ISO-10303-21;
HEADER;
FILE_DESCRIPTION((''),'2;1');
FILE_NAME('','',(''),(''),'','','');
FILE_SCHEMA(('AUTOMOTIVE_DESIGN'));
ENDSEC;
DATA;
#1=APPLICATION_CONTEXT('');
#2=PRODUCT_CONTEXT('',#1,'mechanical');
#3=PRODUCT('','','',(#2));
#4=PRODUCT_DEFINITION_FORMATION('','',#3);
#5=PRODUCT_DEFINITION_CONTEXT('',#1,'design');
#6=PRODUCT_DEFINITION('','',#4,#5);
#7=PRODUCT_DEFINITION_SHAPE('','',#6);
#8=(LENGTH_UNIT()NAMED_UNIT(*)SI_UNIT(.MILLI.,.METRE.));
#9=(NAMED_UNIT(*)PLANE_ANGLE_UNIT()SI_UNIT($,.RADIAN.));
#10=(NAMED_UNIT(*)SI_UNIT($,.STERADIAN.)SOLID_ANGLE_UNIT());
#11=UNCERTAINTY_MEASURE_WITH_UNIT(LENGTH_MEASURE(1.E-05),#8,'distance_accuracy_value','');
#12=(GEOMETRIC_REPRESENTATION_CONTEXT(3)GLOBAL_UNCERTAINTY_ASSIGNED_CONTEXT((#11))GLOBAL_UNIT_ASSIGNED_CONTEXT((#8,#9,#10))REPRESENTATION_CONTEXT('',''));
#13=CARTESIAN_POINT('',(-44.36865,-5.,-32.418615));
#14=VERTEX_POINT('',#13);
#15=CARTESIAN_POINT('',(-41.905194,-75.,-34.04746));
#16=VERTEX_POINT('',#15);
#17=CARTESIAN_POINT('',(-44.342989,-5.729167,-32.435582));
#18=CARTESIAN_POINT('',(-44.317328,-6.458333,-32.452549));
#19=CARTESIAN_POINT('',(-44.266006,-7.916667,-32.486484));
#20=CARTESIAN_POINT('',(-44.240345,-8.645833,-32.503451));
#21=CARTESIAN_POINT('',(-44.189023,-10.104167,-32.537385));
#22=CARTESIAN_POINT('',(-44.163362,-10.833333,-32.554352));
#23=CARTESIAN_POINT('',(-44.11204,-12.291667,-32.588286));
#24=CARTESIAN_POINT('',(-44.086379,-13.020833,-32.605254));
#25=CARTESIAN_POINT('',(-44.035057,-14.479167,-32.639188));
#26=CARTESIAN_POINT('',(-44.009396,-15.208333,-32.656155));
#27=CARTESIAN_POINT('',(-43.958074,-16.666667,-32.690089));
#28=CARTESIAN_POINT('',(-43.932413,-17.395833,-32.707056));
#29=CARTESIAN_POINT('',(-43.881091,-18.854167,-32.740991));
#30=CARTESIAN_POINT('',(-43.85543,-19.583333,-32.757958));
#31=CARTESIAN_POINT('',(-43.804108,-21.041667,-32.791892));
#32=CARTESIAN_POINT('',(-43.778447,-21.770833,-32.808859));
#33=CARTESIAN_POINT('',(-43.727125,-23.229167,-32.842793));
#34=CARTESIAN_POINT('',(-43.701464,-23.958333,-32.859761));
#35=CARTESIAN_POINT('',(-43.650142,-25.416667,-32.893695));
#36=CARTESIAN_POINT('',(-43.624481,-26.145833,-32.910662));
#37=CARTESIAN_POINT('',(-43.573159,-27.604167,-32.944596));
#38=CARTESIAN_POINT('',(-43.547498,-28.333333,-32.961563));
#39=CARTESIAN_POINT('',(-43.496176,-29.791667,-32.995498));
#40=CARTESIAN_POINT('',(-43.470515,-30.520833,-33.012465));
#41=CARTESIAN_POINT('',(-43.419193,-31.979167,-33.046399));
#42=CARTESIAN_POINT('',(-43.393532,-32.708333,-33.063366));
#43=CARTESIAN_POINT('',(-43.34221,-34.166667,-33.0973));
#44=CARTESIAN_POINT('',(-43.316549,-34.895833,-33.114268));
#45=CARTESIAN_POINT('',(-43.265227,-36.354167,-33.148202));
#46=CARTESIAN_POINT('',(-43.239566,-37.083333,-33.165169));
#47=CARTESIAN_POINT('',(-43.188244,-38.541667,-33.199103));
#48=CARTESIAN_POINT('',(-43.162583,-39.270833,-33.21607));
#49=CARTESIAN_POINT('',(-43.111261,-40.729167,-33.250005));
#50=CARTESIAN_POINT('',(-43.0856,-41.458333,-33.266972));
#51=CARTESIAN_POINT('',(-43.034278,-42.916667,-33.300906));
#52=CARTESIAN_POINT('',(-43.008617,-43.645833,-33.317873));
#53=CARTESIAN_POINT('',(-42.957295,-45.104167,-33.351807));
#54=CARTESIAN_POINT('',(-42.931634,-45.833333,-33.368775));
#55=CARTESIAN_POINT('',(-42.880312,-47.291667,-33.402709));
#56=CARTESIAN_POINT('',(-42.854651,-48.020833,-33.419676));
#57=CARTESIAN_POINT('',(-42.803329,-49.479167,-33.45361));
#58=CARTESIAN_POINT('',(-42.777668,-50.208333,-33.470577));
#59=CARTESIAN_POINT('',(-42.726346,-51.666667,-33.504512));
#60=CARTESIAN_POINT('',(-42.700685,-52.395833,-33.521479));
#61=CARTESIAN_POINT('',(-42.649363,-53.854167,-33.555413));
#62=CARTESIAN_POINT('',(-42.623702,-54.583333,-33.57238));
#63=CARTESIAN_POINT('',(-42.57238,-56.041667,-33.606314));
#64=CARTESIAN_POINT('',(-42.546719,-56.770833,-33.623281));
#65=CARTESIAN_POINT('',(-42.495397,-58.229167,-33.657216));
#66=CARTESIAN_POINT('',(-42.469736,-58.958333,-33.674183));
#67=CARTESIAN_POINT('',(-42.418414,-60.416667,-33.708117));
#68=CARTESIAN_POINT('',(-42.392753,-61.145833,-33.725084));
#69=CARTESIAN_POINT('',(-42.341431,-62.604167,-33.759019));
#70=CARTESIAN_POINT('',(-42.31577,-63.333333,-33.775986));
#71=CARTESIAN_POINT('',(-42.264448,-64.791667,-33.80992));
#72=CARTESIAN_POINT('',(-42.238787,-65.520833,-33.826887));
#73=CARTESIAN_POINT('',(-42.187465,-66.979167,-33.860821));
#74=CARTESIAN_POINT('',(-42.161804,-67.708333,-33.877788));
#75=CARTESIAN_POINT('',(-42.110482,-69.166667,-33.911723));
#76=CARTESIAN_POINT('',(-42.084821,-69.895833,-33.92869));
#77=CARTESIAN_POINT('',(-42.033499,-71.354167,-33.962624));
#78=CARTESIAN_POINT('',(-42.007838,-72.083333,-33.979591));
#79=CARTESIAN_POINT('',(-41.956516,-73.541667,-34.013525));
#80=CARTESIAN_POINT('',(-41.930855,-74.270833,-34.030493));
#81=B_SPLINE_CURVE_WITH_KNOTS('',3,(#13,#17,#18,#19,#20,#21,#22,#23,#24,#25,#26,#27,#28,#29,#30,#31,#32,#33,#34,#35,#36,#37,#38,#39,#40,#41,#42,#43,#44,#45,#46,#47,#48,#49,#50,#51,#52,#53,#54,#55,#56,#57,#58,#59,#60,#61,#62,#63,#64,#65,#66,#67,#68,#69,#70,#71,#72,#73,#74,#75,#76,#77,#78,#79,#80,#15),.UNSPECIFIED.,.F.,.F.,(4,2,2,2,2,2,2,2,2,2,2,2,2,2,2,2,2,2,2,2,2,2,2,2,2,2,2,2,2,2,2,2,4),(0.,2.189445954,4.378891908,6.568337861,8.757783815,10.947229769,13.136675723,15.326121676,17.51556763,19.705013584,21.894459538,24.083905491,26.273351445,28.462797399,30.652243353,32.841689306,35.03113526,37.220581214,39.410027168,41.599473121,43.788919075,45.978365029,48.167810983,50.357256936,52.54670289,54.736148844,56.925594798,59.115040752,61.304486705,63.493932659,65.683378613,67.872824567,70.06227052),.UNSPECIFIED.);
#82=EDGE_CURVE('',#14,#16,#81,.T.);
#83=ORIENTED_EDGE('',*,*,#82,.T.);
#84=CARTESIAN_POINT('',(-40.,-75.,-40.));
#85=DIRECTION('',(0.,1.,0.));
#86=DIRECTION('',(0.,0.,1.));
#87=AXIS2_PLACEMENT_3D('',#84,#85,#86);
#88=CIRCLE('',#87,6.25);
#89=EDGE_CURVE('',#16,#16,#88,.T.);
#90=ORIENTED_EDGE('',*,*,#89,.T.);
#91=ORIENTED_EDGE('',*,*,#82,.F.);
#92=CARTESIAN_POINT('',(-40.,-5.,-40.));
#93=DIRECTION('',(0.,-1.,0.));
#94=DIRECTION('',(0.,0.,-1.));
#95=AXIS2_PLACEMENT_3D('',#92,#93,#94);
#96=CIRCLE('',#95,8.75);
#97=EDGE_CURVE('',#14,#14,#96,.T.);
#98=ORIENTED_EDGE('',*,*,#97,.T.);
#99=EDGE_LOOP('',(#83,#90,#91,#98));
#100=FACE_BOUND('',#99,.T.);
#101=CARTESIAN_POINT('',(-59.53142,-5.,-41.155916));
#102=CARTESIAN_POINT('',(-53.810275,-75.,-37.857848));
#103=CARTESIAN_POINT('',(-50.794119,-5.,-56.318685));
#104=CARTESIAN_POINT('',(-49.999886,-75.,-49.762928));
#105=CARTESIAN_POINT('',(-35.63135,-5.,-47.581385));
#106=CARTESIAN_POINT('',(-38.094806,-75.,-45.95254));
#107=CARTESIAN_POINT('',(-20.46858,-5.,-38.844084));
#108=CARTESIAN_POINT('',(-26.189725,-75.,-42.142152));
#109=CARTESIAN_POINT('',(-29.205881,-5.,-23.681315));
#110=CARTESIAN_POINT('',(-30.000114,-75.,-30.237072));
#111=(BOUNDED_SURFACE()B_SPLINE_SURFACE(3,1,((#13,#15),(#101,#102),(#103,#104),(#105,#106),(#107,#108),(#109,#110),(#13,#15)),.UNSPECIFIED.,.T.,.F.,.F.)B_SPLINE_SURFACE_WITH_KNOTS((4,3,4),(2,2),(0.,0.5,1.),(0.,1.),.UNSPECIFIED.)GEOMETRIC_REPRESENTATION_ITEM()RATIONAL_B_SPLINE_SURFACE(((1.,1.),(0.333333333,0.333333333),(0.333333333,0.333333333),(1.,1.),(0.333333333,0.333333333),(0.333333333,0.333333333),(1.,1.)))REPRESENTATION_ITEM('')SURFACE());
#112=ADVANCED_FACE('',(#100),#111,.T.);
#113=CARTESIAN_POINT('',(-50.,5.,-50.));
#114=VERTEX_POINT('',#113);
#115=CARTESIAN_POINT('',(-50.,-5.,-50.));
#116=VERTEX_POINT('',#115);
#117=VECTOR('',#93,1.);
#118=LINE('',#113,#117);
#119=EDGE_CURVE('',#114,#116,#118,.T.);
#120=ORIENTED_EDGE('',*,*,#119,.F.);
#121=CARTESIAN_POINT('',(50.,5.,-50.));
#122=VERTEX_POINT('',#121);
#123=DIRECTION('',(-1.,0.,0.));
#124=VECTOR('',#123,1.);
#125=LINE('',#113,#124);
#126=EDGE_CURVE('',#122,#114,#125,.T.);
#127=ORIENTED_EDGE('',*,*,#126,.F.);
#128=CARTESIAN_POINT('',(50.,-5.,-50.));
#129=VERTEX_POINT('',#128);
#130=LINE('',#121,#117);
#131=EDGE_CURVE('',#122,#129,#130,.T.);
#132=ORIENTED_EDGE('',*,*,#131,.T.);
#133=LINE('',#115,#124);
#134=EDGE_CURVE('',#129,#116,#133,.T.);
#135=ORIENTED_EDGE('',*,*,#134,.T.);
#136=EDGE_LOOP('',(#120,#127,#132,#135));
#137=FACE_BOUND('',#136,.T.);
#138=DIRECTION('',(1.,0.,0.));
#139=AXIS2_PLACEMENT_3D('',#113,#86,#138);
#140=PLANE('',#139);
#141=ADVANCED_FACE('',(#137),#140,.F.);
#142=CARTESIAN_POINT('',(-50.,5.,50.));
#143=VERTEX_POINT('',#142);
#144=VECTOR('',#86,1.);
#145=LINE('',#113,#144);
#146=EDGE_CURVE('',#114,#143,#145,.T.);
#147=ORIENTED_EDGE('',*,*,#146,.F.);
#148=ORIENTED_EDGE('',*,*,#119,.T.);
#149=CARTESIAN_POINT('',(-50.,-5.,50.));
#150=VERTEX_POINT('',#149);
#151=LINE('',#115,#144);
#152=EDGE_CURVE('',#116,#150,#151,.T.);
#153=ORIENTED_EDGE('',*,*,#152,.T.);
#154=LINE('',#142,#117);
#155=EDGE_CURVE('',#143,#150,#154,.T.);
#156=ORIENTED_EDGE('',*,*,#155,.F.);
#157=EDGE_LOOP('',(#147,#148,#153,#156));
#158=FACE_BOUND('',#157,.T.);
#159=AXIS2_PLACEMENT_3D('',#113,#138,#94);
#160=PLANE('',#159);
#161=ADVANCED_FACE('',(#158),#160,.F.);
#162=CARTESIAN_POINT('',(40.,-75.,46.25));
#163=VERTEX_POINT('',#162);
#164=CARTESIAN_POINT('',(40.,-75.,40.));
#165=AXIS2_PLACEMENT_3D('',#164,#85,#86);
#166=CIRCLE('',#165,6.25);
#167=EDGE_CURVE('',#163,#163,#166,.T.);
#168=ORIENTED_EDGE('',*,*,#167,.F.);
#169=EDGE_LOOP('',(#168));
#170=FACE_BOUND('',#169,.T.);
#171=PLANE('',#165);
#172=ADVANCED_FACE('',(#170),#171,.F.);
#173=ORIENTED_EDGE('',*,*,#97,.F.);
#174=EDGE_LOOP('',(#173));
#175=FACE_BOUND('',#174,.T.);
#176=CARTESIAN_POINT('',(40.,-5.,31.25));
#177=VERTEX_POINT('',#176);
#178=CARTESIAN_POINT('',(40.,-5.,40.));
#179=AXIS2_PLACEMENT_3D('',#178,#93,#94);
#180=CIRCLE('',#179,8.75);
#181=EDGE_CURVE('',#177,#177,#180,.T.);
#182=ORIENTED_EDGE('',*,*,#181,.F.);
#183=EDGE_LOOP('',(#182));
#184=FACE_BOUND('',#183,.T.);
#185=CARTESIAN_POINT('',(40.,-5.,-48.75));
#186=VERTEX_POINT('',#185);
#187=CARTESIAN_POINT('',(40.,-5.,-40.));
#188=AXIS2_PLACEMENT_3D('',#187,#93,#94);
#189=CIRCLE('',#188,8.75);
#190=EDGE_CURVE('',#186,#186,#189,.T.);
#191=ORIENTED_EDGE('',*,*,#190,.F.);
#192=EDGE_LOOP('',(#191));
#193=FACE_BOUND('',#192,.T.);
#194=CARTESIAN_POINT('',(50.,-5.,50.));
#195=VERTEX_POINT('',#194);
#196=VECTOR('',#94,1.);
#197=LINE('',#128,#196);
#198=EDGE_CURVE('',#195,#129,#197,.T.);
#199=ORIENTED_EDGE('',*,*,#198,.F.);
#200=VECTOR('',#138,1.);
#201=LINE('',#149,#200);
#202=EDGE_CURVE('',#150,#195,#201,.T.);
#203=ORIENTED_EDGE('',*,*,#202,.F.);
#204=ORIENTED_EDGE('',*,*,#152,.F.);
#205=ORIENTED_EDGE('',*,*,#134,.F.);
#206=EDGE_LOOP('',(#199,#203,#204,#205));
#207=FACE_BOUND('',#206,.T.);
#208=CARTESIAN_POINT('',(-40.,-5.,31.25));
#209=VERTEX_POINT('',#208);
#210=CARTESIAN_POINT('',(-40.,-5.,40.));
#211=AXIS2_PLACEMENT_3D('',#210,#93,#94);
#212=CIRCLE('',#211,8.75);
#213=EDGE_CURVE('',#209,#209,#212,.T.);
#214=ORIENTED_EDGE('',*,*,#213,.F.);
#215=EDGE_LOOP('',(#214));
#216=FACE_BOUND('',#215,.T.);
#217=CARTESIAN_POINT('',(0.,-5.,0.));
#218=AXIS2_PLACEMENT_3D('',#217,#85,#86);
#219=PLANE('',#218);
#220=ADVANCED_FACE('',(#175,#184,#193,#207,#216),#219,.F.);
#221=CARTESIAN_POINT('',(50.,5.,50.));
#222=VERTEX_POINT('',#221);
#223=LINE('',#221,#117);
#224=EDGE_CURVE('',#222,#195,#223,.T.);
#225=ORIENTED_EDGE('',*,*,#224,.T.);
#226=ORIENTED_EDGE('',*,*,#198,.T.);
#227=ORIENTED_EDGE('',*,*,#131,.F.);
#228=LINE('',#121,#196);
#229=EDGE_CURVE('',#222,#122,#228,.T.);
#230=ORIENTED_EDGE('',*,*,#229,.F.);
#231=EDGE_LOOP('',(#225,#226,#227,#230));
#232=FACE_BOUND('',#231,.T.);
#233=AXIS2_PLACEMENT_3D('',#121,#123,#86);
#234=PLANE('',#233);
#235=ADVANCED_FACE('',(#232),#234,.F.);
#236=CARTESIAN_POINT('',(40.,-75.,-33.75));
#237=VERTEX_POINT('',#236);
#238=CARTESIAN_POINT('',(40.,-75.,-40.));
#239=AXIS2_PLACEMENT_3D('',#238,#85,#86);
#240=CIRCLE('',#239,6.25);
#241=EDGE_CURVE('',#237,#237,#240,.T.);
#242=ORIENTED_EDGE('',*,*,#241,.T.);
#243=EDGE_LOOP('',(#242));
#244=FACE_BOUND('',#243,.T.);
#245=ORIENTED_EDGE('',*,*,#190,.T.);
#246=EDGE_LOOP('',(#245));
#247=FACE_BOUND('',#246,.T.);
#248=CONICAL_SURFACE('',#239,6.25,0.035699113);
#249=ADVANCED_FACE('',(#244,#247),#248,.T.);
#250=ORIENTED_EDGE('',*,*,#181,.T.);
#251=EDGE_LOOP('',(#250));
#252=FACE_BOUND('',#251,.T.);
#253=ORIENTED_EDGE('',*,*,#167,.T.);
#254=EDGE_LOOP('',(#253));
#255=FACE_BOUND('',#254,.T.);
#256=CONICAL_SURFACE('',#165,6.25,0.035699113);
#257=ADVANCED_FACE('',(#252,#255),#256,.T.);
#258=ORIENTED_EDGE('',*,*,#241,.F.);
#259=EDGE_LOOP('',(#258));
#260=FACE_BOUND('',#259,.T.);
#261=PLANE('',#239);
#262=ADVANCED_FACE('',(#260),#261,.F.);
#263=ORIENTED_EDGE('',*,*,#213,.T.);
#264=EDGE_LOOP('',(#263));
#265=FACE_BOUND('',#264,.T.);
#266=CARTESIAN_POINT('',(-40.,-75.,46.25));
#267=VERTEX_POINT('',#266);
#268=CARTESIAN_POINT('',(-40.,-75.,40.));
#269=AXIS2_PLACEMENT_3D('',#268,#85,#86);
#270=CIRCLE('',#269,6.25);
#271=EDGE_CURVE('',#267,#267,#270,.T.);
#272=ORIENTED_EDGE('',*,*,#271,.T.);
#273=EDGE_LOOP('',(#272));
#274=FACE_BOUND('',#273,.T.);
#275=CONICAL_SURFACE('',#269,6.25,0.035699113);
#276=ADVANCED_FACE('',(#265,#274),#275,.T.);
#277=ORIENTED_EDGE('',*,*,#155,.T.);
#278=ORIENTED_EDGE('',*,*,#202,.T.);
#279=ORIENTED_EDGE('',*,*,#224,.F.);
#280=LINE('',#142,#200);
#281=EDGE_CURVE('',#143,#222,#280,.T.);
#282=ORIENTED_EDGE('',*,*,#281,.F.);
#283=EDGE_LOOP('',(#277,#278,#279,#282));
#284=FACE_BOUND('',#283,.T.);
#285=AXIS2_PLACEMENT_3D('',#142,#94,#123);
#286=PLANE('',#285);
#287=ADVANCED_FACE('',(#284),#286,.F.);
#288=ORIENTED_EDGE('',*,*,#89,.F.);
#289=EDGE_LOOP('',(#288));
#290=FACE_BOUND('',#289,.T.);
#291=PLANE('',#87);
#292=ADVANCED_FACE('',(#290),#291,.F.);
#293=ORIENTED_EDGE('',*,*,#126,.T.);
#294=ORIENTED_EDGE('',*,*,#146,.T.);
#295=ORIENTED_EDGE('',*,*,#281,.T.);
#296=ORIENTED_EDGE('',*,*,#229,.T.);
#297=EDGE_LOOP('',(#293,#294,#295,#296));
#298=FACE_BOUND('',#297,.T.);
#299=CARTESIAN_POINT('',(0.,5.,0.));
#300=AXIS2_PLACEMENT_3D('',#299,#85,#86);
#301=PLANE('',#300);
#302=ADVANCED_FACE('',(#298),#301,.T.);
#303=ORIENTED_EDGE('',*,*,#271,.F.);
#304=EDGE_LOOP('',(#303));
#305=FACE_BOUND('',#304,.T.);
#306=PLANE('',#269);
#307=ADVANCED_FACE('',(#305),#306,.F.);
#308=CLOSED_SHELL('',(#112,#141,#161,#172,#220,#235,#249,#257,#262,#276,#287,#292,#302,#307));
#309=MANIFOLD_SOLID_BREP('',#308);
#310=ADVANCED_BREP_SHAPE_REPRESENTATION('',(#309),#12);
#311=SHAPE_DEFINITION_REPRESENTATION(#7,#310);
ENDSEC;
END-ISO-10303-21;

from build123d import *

# Parameters (mm, degrees)
SKETCH1_W           = 100
SKETCH1_H           = 100
BOSS_EXTRUDE1_DEPTH = 5
SKETCH2_4_R         = 8.75
SKETCH3_3_R         = 6.25
SKETCH2_5_R         = 8.75
SKETCH3_4_R         = 6.25
SKETCH2_6_R         = 8.75
SKETCH3_5_R         = 6.25


with BuildPart() as part:
    # Sketch1 → Boss-Extrude1 (new, symmetric)
    with BuildSketch(Plane(origin=(0, 0, 0), x_dir=(1, 0, 0), z_dir=(0, 1, 0))):
        Rectangle(SKETCH1_W, SKETCH1_H)
    extrude(amount=BOSS_EXTRUDE1_DEPTH, both=True)

    # Loft1: read off the stored shape, not the designer's step
    # Loft1: loft between two sections, ruled curve by curve
    loft1_from = [
        Edge.make_bspline([(-44.368650168, -5, -32.418615185), (-59.531419798, -5, -41.15591552), (-50.794119462, -5, -56.31868515), (-35.631349832, -5, -47.581384815), (-20.468580202, -5, -38.84408448), (-29.205880538, -5, -23.68131485), (-44.368650168, -5, -32.418615185)], [0, 0, 0, 0, 0.5, 0.5, 0.5, 1, 1, 1, 1], 3, [1, 0.333333333, 0.333333333, 1, 0.333333333, 0.333333333, 1]),
    ]
    loft1_to = [
        Edge.make_bspline([(-41.905194087, -75, -34.047459745), (-53.810274598, -75, -37.857847919), (-49.999886423, -75, -49.76292843), (-38.094805913, -75, -45.952540255), (-26.189725402, -75, -42.142152081), (-30.000113577, -75, -30.23707157), (-41.905194087, -75, -34.047459745)], [0, 0, 0, 0, 0.5, 0.5, 0.5, 1, 1, 1, 1], 3, [1, 0.333333333, 0.333333333, 1, 0.333333333, 0.333333333, 1]),
    ]
    loft1 = Solid(Shell([*[Face.make_surface_from_curves(loft1_from[k], loft1_to[k]) for k in range(1)], Face(Wire(loft1_from)), Face(Wire(loft1_to))]))
    add(loft1)

    # Sketch2<4> → Loft2 section 0
    with BuildSketch(Plane.XZ.offset(5)):
        with Locations((-40, 40)):
            Circle(SKETCH2_4_R)
    # Sketch3<3> → Loft2 section 1
    with BuildSketch(Plane(origin=(0, -75, 0), x_dir=(1, 0, 0), z_dir=(0, 1, 0))):
        with Locations((-40, -40)):
            Circle(SKETCH3_3_R)
    loft()

    # Sketch2<5> → Loft3 section 0
    with BuildSketch(Plane.XZ.offset(5)):
        with Locations((40, 40)):
            Circle(SKETCH2_5_R)
    # Sketch3<4> → Loft3 section 1
    with BuildSketch(Plane(origin=(0, -75, 0), x_dir=(1, 0, 0), z_dir=(0, 1, 0))):
        with Locations((40, -40)):
            Circle(SKETCH3_4_R)
    loft()

    # Sketch2<6> → Loft4 section 0
    with BuildSketch(Plane.XZ.offset(5)):
        with Locations((40, -40)):
            Circle(SKETCH2_6_R)
    # Sketch3<5> → Loft4 section 1
    with BuildSketch(Plane(origin=(0, -75, 0), x_dir=(1, 0, 0), z_dir=(0, 1, 0))):
        with Locations((40, 40)):
            Circle(SKETCH3_5_R)
    loft()


solid = part.part
